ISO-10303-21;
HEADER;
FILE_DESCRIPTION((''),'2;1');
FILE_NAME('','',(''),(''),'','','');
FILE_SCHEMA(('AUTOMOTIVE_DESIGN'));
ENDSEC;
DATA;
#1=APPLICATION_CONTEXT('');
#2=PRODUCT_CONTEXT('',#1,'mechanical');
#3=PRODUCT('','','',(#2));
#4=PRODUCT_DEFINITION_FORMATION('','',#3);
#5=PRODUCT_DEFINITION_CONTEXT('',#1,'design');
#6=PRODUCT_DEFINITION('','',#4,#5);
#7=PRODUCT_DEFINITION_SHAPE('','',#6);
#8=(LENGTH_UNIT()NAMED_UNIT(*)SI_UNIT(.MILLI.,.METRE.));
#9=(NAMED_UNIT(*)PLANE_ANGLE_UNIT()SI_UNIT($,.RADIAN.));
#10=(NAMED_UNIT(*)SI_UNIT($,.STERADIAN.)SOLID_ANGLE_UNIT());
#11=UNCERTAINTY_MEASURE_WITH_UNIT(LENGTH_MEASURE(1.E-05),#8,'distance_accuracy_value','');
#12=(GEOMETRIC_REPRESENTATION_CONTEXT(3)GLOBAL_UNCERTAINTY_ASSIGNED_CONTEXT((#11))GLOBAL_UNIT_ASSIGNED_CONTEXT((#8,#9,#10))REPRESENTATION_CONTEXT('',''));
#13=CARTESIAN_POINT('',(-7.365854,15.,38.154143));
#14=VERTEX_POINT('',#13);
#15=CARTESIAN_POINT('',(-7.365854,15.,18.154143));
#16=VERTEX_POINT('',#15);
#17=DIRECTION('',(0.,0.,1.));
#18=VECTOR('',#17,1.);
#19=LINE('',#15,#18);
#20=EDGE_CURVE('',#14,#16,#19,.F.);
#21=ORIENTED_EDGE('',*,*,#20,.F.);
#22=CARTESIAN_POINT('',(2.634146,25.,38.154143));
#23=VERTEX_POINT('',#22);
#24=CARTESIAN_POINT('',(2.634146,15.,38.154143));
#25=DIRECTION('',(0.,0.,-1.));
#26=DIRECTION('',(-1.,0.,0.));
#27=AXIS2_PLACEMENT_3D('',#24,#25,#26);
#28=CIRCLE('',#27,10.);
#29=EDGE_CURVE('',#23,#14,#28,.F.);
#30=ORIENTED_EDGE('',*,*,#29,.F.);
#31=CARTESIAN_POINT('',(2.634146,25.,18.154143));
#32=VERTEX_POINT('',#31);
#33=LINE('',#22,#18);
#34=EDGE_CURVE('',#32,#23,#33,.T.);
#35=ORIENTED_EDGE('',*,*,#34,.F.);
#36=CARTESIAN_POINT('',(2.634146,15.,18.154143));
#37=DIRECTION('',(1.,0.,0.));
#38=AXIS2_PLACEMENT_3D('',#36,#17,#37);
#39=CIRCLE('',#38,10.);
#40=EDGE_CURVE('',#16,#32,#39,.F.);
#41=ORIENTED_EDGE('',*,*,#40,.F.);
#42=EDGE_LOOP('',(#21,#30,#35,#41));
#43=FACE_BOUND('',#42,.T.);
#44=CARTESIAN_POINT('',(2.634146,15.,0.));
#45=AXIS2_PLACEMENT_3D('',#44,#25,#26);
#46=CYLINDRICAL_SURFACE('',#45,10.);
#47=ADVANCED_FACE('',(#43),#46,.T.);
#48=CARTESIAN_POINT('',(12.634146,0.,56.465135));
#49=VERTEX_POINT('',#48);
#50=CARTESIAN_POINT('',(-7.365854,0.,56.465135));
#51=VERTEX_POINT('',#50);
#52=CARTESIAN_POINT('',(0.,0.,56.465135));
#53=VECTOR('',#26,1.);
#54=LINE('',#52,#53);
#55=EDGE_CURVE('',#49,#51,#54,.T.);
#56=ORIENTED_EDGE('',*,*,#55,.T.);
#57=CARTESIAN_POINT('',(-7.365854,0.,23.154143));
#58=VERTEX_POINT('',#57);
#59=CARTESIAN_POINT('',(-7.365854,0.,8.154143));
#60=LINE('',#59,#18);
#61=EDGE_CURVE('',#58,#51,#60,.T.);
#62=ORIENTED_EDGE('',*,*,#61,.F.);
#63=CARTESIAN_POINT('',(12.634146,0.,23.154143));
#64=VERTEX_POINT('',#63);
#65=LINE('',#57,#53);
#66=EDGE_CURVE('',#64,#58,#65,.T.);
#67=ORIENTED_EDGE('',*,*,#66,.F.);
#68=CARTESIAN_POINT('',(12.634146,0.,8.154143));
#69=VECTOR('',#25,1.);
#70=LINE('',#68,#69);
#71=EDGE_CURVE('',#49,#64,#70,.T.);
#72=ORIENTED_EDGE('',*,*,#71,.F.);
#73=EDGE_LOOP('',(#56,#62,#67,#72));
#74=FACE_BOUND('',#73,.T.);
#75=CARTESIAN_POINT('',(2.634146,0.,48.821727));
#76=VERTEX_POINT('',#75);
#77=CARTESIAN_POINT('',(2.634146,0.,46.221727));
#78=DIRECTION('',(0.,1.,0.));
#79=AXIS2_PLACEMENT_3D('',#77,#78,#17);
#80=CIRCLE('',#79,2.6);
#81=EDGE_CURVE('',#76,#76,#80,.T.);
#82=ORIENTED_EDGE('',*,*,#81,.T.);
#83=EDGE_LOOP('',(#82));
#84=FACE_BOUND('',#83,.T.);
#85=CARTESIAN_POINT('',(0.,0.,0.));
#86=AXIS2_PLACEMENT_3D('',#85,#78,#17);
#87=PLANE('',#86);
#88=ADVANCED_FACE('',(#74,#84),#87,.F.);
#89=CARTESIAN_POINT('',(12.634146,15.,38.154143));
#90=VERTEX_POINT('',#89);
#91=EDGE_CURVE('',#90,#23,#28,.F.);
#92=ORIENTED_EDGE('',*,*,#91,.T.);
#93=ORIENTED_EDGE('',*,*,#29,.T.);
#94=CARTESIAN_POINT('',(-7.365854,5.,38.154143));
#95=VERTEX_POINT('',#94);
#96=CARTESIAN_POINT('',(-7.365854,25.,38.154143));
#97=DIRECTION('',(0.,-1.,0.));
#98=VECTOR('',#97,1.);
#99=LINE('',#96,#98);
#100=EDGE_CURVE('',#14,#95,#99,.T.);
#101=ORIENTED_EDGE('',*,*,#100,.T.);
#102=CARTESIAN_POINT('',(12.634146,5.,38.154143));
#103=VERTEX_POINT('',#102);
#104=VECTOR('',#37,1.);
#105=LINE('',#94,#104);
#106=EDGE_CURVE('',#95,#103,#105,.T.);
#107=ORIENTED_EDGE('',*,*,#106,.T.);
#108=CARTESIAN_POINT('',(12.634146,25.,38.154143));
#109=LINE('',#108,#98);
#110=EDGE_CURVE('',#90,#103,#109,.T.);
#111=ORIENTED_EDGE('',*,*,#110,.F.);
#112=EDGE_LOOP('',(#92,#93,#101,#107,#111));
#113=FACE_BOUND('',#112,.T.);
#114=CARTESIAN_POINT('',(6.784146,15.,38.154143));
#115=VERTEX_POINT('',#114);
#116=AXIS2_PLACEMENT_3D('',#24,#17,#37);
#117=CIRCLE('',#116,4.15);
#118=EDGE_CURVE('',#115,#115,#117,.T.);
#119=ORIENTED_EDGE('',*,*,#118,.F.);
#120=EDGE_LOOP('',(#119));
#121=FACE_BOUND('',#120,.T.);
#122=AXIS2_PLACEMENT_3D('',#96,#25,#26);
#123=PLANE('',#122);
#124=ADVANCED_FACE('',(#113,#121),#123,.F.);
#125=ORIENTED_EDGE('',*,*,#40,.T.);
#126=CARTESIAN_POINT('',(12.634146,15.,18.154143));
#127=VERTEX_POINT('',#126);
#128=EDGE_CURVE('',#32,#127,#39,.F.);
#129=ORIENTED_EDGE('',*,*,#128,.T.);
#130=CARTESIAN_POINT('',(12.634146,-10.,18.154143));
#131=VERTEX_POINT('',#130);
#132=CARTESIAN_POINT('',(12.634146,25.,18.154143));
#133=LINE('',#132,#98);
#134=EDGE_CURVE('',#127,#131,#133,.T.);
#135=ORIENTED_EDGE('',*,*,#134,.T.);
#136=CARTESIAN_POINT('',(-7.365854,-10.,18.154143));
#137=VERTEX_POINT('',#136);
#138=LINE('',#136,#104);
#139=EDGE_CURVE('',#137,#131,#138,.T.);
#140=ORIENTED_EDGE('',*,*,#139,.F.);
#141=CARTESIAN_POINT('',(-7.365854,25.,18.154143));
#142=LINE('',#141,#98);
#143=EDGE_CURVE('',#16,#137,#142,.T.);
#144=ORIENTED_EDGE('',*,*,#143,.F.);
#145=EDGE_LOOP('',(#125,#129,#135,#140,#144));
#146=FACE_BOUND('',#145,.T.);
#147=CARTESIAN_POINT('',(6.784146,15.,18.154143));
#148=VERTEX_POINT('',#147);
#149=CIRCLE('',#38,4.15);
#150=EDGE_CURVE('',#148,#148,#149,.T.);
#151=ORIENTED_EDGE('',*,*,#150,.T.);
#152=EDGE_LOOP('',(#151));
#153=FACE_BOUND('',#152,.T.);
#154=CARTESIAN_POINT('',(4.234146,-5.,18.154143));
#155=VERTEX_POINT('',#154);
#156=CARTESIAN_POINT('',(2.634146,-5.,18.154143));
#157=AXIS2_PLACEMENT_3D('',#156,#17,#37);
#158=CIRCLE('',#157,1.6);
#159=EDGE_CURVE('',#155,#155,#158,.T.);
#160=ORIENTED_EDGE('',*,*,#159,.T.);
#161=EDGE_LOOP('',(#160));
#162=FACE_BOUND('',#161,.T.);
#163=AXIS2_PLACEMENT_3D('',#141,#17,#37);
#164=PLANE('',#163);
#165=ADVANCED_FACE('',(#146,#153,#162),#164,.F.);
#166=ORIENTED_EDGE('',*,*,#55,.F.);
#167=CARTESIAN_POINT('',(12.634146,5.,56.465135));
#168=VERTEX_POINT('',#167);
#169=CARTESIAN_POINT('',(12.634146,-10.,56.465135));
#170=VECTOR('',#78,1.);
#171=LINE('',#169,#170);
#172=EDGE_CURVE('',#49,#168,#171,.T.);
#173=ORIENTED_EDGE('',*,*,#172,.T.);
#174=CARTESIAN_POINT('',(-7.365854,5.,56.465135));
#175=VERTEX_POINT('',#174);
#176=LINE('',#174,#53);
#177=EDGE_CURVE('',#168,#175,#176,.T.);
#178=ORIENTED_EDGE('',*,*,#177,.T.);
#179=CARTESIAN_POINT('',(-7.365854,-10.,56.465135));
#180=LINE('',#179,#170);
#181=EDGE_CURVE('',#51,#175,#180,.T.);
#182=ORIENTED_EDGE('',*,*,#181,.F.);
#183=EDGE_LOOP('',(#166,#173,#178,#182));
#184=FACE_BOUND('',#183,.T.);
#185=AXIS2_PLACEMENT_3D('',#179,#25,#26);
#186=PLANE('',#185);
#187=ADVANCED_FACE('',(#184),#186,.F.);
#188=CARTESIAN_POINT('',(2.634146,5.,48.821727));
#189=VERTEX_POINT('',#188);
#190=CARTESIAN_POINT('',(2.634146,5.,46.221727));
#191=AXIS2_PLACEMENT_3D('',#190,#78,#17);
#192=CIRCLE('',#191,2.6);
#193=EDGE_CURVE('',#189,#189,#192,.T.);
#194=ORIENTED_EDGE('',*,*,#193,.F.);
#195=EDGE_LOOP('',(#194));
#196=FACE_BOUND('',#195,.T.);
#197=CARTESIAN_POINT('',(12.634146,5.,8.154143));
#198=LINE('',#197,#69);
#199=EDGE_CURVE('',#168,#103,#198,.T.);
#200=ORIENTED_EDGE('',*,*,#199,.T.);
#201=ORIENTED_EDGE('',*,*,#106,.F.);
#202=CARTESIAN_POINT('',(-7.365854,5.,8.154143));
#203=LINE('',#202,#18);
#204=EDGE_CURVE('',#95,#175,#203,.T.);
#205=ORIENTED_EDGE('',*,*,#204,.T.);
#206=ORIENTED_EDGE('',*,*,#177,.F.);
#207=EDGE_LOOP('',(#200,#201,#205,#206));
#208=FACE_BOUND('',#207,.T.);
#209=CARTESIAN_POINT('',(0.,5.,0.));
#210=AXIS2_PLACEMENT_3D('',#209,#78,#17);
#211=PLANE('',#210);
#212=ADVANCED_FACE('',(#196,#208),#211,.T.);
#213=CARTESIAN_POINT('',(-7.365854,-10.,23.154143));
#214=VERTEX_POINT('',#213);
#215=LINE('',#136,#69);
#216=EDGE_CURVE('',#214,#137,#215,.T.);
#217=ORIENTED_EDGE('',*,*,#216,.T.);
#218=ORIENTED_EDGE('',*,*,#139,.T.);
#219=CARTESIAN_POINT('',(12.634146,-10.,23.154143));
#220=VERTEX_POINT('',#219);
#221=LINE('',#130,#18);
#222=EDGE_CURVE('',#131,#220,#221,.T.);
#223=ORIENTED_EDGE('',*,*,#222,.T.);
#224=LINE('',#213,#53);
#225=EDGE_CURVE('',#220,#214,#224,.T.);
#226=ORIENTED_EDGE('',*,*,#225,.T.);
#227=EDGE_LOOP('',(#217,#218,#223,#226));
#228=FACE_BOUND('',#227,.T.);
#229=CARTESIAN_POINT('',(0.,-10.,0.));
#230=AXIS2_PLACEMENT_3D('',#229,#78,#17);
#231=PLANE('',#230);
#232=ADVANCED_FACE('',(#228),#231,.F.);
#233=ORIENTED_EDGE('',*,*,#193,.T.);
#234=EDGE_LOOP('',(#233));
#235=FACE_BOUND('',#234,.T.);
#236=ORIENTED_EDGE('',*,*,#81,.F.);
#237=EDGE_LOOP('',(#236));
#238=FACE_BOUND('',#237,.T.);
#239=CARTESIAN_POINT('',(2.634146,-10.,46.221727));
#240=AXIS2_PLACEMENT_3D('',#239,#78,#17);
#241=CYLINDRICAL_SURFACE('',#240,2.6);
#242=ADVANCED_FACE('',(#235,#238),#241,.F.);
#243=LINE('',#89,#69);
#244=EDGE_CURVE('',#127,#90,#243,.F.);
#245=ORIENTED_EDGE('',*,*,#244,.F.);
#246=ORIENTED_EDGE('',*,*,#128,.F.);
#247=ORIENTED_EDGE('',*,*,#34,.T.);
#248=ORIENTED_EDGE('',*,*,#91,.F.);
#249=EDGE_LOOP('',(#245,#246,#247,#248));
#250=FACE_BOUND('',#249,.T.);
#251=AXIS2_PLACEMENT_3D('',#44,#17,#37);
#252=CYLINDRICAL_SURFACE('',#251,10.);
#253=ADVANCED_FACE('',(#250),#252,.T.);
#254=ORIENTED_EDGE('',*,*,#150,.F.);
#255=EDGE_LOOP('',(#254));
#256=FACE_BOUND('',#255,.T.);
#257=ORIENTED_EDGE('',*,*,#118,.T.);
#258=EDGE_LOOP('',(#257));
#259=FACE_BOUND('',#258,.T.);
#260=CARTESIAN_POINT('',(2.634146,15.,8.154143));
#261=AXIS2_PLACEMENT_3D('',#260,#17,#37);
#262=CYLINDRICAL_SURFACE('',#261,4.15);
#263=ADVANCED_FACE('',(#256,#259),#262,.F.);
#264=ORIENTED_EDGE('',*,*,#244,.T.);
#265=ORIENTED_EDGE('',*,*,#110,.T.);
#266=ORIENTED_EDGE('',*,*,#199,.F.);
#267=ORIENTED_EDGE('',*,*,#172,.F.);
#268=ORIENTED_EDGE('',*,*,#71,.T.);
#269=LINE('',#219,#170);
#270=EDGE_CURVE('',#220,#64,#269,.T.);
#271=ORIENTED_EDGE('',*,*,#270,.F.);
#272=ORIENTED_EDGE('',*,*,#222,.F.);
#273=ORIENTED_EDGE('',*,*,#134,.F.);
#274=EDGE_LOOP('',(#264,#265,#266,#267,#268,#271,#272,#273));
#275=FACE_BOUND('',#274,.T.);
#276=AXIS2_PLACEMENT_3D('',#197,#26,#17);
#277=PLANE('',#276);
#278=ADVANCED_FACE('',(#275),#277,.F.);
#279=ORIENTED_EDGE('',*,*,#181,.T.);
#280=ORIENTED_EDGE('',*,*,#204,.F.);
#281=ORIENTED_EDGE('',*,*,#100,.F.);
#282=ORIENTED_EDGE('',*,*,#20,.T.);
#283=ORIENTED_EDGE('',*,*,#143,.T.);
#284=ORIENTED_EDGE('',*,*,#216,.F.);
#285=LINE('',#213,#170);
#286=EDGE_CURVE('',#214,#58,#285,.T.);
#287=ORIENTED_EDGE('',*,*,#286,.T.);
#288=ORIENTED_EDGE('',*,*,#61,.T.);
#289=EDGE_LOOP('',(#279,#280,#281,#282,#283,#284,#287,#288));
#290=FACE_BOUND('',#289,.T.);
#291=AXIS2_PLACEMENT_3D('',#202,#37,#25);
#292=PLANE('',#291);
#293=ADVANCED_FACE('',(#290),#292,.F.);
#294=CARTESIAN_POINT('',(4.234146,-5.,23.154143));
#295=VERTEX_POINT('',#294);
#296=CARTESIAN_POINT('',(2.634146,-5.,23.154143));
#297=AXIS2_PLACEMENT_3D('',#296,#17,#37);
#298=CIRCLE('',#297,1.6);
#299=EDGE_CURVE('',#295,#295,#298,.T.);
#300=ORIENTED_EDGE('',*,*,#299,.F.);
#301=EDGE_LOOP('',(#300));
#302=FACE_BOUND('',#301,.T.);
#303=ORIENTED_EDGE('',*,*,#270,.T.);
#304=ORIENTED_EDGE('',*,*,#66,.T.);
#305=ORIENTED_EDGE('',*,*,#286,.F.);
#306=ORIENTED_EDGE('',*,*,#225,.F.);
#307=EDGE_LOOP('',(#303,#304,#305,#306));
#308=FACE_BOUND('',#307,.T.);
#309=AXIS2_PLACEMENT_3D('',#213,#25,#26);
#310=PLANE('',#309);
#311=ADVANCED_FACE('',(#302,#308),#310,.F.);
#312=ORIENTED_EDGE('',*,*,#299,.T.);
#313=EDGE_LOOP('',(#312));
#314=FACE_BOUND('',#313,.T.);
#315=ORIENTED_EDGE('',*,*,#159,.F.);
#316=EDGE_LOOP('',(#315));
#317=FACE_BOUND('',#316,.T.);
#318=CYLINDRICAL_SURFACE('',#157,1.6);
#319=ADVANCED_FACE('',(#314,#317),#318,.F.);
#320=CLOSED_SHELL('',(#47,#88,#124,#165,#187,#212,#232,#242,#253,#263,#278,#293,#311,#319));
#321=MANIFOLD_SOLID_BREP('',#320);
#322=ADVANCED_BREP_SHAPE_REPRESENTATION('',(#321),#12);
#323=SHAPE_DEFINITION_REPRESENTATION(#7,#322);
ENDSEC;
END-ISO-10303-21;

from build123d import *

# Parameters (mm, degrees)
SKETCH_1_W          = 20
SKETCH_1_H          = 40
EXTRUDE_1_DEPTH     = 5
SKETCH_2_W          = 20
SKETCH_2_H          = 20
EXTRUDE_2_DEPTH     = 20
SKETCH_3_R          = 4.15
CUT_EXTRUDE_1_DEPTH = 42.044142746
FILLET_1_R          = 10
SKETCH_6_W          = 20
SKETCH_6_H          = 25.791536141
CUT_EXTRUDE_3_DEPTH = 54.65112416
SKETCH_7_W          = 20
SKETCH_7_H          = 5
EXTRUDE_5_DEPTH     = 10
SKETCH_8_W          = 20
SKETCH_8_H          = 5
EXTRUDE_6_DEPTH     = 10
SKETCH_10_R         = 1.6
CUT_EXTRUDE_5_DEPTH = 45.828803841
SKETCH_11_W         = 20
SKETCH_11_H         = 5
EXTRUDE_7_DEPTH     = 20
SKETCH_12_R         = 2.6
CUT_EXTRUDE_7_DEPTH = 82.655934826
SKETCH_13_W         = 20
SKETCH_13_H         = 21.689007925
CUT_EXTRUDE_8_DEPTH = 82.655934826


with BuildPart() as part:
    # 草图1 → 凸台-拉伸1 (new body)
    with BuildSketch(Plane(origin=(0, 0, 0), x_dir=(1, 0, 0), z_dir=(0, 1, 0))):
        with Locations((2.634146341, -28.154142811)):
            Rectangle(SKETCH_1_W, SKETCH_1_H)
    extrude(amount=EXTRUDE_1_DEPTH)

    # 草图2 → 凸台-拉伸2 (add)
    with BuildSketch(Plane(origin=(0, 5, 0), x_dir=(1, 0, 0), z_dir=(0, 1, 0))):
        with Locations((2.634146341, -28.154142811)):
            Rectangle(SKETCH_2_W, SKETCH_2_H)
    extrude(amount=EXTRUDE_2_DEPTH)

    # 草图3 → 切除-拉伸1 (cut, through all)
    with BuildSketch(Plane.XY.offset(38.154142811)):
        with Locations((2.634146341, 15)):
            Circle(SKETCH_3_R)
    extrude(amount=-CUT_EXTRUDE_1_DEPTH, mode=Mode.SUBTRACT)

    # 圆角1
    fillet_1_edges = [part.edges().sort_by_distance(p)[0] for p in [
        (12.634146341, 25, 28.154142811),
        (-7.365853659, 25, 28.154142811),
    ]]
    fillet(fillet_1_edges, radius=FILLET_1_R - 0.0001)  # a hair under: the kernel refuses the full size

    # 草图6 → 切除-拉伸3 (cut, through all)
    with BuildSketch(Plane(origin=(0, 5, 0), x_dir=(1, 0, 0), z_dir=(0, 1, 0))):
        with Locations((2.634146341, -5.25837474)):
            Rectangle(SKETCH_6_W, SKETCH_6_H)
    extrude(amount=-CUT_EXTRUDE_3_DEPTH, mode=Mode.SUBTRACT)

    # 草图7 → 凸台-拉伸5 (add)
    with BuildSketch(Plane.XZ):
        with Locations((2.634146341, 20.654142811)):
            Rectangle(SKETCH_7_W, SKETCH_7_H)
    extrude(amount=EXTRUDE_5_DEPTH)

    # 草图8 → 凸台-拉伸6 (add)
    with BuildSketch(Plane.XY.offset(48.154142811)):
        with Locations((2.634146341, 2.5)):
            Rectangle(SKETCH_8_W, SKETCH_8_H)
    extrude(amount=EXTRUDE_6_DEPTH)

    # 草图10 → 切除-拉伸5 (cut, through all)
    with BuildSketch(Plane.XY.offset(23.154142811)):
        with Locations((2.634146341, -5)):
            Circle(SKETCH_10_R)
    extrude(amount=-CUT_EXTRUDE_5_DEPTH, mode=Mode.SUBTRACT)

    # 草图11 → 凸台-拉伸7 (add)
    with BuildSketch(Plane.XY.offset(58.154142811)):
        with Locations((2.634146341, 2.5)):
            Rectangle(SKETCH_11_W, SKETCH_11_H)
    extrude(amount=EXTRUDE_7_DEPTH)

    # 草图12 → 切除-拉伸7 (cut, through all)
    with BuildSketch(Plane(origin=(0, 5, 0), x_dir=(1, 0, 0), z_dir=(0, 1, 0))):
        with Locations(Location((2.634146341, -46.221727325, 0), (0, 0, 270))):
            Circle(SKETCH_12_R)
        with Locations(Location((2.634146341, -72.110167443, 0), (0, 0, 270))):
            Circle(SKETCH_12_R)
    extrude(amount=-CUT_EXTRUDE_7_DEPTH, mode=Mode.SUBTRACT)

    # 草图13 → 切除-拉伸8 (cut, through all)
    with BuildSketch(Plane(origin=(0, 5, 0), x_dir=(1, 0, 0), z_dir=(0, 1, 0))):
        with Locations((2.634146341, -67.309638849)):
            Rectangle(SKETCH_13_W, SKETCH_13_H)
    extrude(amount=-CUT_EXTRUDE_8_DEPTH, mode=Mode.SUBTRACT)


solid = part.part
